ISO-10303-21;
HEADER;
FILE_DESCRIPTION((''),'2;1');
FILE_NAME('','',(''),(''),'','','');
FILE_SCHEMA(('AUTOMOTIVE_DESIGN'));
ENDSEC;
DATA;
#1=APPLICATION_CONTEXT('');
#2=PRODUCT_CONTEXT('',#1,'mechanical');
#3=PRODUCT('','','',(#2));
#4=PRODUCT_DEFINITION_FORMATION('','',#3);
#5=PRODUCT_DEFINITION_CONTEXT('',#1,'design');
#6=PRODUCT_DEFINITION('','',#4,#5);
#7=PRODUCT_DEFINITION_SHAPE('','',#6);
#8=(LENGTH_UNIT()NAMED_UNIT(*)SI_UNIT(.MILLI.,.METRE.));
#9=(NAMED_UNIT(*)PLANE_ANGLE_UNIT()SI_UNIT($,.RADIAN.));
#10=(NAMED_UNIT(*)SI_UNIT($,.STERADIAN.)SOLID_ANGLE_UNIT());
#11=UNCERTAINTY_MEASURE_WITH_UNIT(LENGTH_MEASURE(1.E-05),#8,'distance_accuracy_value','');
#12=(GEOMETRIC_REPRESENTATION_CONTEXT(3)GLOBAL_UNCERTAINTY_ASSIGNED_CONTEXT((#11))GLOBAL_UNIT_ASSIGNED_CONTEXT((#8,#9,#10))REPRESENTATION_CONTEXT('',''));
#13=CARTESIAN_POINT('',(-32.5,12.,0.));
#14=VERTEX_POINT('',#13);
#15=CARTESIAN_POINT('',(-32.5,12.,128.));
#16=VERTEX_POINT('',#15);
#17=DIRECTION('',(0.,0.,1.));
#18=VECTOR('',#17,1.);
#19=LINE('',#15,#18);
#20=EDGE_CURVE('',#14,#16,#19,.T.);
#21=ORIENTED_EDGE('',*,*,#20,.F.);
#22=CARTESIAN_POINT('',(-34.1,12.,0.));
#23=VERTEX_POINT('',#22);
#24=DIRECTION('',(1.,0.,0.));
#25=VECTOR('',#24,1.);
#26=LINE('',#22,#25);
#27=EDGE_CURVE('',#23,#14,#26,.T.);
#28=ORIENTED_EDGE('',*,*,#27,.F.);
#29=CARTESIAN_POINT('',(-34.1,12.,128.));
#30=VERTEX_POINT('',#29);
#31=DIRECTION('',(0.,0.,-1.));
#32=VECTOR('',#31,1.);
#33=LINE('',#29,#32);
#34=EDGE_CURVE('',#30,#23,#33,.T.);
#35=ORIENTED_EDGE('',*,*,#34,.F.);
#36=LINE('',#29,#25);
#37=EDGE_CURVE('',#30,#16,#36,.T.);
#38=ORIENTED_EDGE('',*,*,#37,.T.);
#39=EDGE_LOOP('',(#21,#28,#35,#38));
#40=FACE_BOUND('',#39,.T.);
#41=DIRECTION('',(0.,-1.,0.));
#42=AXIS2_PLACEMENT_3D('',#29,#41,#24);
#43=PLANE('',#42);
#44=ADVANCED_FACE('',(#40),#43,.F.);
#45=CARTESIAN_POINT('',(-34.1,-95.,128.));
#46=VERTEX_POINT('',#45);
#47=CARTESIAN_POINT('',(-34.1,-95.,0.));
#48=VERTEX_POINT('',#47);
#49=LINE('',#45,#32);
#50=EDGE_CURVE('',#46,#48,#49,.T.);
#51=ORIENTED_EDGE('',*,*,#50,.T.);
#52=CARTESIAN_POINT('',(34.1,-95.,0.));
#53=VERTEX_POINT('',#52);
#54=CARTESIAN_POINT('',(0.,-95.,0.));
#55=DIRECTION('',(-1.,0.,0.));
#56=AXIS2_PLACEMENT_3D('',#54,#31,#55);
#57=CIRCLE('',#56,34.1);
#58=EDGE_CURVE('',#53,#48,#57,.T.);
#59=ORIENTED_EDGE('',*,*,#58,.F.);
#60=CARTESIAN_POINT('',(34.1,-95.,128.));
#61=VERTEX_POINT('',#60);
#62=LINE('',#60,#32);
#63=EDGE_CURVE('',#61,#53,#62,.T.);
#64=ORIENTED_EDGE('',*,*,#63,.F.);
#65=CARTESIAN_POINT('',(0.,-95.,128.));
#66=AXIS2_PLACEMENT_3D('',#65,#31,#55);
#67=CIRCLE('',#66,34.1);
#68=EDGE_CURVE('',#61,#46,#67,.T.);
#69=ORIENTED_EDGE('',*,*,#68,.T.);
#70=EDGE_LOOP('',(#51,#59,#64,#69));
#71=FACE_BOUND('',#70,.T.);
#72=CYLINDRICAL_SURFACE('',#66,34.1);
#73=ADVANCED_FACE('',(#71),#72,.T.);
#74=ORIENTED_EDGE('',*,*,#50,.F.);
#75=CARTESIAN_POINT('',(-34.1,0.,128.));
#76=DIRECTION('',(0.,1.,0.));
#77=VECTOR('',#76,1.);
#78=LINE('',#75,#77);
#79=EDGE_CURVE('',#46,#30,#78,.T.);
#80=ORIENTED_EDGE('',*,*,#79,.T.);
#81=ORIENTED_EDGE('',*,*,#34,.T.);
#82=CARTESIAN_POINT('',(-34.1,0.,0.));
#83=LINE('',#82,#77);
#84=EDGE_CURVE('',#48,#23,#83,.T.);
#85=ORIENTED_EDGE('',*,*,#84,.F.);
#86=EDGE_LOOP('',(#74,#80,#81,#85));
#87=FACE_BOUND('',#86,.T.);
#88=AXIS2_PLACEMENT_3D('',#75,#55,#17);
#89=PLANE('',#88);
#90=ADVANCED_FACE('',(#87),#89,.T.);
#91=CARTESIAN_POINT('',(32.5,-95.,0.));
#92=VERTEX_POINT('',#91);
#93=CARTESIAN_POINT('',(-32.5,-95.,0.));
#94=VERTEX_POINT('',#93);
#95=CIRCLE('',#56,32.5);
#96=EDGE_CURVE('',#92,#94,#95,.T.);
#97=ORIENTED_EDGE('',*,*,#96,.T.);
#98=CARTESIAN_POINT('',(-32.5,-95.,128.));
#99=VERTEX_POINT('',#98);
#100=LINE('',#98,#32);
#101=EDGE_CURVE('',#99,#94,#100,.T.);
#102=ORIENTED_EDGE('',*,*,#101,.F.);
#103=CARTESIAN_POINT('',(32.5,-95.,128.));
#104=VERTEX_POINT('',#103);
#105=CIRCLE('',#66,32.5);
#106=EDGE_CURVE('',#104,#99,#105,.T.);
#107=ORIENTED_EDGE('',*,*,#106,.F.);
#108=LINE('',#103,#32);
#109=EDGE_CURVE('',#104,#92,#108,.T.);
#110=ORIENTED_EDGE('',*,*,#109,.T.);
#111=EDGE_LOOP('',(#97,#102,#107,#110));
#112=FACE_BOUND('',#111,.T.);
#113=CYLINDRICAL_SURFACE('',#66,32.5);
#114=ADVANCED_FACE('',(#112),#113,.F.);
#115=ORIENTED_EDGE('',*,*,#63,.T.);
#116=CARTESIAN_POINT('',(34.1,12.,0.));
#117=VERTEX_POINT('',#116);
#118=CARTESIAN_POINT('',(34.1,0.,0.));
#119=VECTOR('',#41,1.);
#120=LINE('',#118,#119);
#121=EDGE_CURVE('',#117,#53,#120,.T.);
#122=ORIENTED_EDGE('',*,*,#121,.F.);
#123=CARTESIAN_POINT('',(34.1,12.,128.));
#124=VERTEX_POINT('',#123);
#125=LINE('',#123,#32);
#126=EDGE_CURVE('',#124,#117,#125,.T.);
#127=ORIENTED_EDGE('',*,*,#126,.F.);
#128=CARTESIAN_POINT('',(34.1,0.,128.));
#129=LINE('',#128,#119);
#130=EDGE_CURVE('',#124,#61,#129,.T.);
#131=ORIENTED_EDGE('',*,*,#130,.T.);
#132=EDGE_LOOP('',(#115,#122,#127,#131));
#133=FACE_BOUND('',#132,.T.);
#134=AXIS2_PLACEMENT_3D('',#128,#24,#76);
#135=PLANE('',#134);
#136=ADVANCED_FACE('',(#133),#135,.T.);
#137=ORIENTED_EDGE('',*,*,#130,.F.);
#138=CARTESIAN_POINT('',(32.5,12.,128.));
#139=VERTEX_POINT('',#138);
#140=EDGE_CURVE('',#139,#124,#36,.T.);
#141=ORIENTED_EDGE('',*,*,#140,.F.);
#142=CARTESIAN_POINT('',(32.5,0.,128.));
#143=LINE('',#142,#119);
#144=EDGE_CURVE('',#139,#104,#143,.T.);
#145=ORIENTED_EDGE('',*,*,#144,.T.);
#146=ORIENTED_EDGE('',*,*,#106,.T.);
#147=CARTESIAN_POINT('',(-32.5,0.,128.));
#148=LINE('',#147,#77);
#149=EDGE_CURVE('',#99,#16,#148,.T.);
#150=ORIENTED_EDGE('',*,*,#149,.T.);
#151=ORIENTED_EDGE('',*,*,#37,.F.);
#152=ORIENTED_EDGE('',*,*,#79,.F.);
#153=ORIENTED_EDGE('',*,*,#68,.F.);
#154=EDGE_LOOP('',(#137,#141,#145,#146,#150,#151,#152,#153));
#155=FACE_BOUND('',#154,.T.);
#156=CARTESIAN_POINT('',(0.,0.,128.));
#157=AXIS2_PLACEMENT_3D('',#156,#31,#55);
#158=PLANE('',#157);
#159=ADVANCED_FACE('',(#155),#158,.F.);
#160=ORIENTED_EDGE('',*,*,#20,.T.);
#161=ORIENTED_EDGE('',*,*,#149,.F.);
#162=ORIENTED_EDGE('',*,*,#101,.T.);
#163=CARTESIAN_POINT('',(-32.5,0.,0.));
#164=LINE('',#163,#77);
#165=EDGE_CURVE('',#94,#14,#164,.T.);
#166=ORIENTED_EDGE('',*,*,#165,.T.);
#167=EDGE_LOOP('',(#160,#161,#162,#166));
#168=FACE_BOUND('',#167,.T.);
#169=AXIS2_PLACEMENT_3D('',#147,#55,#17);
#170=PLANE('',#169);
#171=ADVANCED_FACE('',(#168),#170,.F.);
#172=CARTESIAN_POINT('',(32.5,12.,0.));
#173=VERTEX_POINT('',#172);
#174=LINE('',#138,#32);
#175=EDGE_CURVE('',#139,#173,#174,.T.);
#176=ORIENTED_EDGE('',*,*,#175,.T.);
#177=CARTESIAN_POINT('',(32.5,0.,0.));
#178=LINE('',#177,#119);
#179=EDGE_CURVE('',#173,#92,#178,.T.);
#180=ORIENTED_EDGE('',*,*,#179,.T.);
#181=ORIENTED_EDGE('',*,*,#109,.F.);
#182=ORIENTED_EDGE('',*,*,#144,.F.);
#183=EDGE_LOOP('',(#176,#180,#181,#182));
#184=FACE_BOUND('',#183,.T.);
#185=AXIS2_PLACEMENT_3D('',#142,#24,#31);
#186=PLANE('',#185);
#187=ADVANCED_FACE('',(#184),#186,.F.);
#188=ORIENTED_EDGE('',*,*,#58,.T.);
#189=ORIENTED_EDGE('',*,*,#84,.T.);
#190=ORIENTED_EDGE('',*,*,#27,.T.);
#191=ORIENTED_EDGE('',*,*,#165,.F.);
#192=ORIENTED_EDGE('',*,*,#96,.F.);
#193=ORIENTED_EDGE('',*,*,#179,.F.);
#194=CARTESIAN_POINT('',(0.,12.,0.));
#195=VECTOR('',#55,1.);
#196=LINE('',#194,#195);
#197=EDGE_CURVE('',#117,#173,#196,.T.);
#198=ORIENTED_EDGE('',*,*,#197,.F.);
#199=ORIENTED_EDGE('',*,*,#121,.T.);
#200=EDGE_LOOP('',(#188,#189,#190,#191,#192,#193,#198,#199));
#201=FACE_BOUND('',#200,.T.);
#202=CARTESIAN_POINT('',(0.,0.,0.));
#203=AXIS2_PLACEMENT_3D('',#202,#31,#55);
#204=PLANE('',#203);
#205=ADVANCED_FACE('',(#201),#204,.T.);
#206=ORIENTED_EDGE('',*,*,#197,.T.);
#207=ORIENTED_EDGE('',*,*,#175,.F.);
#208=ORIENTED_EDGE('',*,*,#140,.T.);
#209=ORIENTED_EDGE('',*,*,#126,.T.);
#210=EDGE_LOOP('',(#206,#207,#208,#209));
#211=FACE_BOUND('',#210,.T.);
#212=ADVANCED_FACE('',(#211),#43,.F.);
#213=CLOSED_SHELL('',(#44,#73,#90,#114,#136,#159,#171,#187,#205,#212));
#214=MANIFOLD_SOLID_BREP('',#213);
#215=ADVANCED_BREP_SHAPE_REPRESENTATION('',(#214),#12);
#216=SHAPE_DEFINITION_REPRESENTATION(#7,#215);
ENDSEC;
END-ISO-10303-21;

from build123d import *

# Parameters (mm, degrees)
SKETCH1_R                = 14
BOSS_EXTRUDE1_DEPTH      = 6
M3_CLEARANCE_HOLE1_D     = 3.6
M3_CLEARANCE_HOLE1_DEPTH = 6
M3_CLEARANCE_HOLE1_TIP   = 1.081549114
FILLET1_R                = 15
SKETCH4_W                = 65
SKETCH4_H                = 9
CUT_EXTRUDE1_DEPTH       = 2
M4_CLEARANCE_HOLE1_D     = 4.8
M4_CLEARANCE_HOLE1_DEPTH = 6
M4_CLEARANCE_HOLE1_TIP   = 1.442065486
CHAMFER1_SIZE            = 2.4
BOSS_EXTRUDE2_DEPTH      = 128
SKETCH10_W               = 128
SKETCH10_H               = 68
CUT_EXTRUDE2_DEPTH       = 195.170157336


with BuildPart() as part:
    # Sketch1 → Boss-Extrude1 (new body)
    with BuildSketch(Plane.XY):
        with BuildLine():
            Line((-32.5, 95), (-32.5, -95))
            ThreePointArc((-32.5, -95), (0, -127.5), (32.5, -95))
            Line((32.5, -95), (32.5, 95))
            Line((32.5, 95), (-32.5, 95))
        make_face()
        with Locations((0, -95)):
            Circle(SKETCH1_R, mode=Mode.SUBTRACT)
    extrude(amount=BOSS_EXTRUDE1_DEPTH)

    # M3 Clearance Hole1
    with Locations(Plane(origin=(0, 0, 0), x_dir=(-1, 0, 0), z_dir=(0, 0, -1))):
        with Locations((-15.5, -110.5), (15.5, -110.5), (15.5, -79.5), (-15.5, -79.5)):
            Hole(M3_CLEARANCE_HOLE1_D / 2, depth=M3_CLEARANCE_HOLE1_DEPTH)
            with Locations((0, 0, -(M3_CLEARANCE_HOLE1_DEPTH + M3_CLEARANCE_HOLE1_TIP / 2))):  # 118° drill point
                Cone(0, M3_CLEARANCE_HOLE1_D / 2, M3_CLEARANCE_HOLE1_TIP, mode=Mode.SUBTRACT)

    # Fillet1
    fillet1_edges = [part.edges().sort_by_distance(p)[0] for p in [
        (-32.5, 95, 3),
        (32.5, 95, 3),
    ]]
    fillet(fillet1_edges, radius=FILLET1_R)

    # Sketch4 → Cut-Extrude1 (cut)
    with BuildSketch(Plane.XY.offset(6)):
        with Locations((0, -60.5)):
            Rectangle(SKETCH4_W, SKETCH4_H)
        with Locations((0, 7.5)):
            Rectangle(SKETCH4_W, SKETCH4_H)
        with Locations((0, 75.5)):
            Rectangle(SKETCH4_W, SKETCH4_H)
    extrude(amount=-CUT_EXTRUDE1_DEPTH, mode=Mode.SUBTRACT)

    # M4 Clearance Hole1
    with Locations(Plane.XY.offset(4)):
        with Locations((-24.5, -60.5), (-24.5, 75.5), (24.5, 75.5), (0, 75.5), (-24.5, 7.5), (0, 7.5), (24.5, 7.5), (24.5, -60.5), (0, -60.5)):
            Hole(M4_CLEARANCE_HOLE1_D / 2, depth=M4_CLEARANCE_HOLE1_DEPTH)
            with Locations((0, 0, -(M4_CLEARANCE_HOLE1_DEPTH + M4_CLEARANCE_HOLE1_TIP / 2))):  # 118° drill point
                Cone(0, M4_CLEARANCE_HOLE1_D / 2, M4_CLEARANCE_HOLE1_TIP, mode=Mode.SUBTRACT)

    # Chamfer1
    chamfer1_edges = [part.edges().sort_by_distance(p)[0] for p in [
        (13.7, -110.5, 0),
        (-17.3, -110.5, 0),
        (-17.3, -79.5, 0),
        (13.7, -79.5, 0),
        (-22.1, 75.5, 0),
        (2.4, 75.5, 0),
        (26.9, 75.5, 0),
        (26.9, 7.5, 0),
        (2.4, 7.5, 0),
        (-22.1, 7.5, 0),
        (-22.1, -60.5, 0),
        (2.4, -60.5, 0),
        (26.9, -60.5, 0),
    ]]
    chamfer(chamfer1_edges, length=CHAMFER1_SIZE)


with BuildPart() as body_2:
    # Sketch7 → Boss-Extrude2 (new body)
    with BuildSketch(Plane(origin=(0, 0, 0), x_dir=(-1, 0, 0), z_dir=(0, 0, -1))):
        with BuildLine():
            ThreePointArc((-34.1, -95), (0, -129.1), (34.1, -95))
            Line((34.1, -95), (34.1, 80))
            Line((34.1, 80), (32.5, 80))
            Line((32.5, 80), (32.5, -95))
            ThreePointArc((32.5, -95), (0, -127.5), (-32.5, -95))
            Line((-32.5, -95), (-32.5, 80))
            Line((-32.5, 80), (-34.1, 80))
            Line((-34.1, 80), (-34.1, -95))
        make_face()
    extrude(amount=-BOSS_EXTRUDE2_DEPTH)

    # Sketch10 → Cut-Extrude2 (cut, through all)
    with BuildSketch(Plane(origin=(34.1, 0, 0), x_dir=(0, 0, -1), z_dir=(1, 0, 0))):
        with Locations((-64, 46)):
            Rectangle(SKETCH10_W, SKETCH10_H)
    extrude(amount=-CUT_EXTRUDE2_DEPTH, mode=Mode.SUBTRACT)


solid = body_2.part
